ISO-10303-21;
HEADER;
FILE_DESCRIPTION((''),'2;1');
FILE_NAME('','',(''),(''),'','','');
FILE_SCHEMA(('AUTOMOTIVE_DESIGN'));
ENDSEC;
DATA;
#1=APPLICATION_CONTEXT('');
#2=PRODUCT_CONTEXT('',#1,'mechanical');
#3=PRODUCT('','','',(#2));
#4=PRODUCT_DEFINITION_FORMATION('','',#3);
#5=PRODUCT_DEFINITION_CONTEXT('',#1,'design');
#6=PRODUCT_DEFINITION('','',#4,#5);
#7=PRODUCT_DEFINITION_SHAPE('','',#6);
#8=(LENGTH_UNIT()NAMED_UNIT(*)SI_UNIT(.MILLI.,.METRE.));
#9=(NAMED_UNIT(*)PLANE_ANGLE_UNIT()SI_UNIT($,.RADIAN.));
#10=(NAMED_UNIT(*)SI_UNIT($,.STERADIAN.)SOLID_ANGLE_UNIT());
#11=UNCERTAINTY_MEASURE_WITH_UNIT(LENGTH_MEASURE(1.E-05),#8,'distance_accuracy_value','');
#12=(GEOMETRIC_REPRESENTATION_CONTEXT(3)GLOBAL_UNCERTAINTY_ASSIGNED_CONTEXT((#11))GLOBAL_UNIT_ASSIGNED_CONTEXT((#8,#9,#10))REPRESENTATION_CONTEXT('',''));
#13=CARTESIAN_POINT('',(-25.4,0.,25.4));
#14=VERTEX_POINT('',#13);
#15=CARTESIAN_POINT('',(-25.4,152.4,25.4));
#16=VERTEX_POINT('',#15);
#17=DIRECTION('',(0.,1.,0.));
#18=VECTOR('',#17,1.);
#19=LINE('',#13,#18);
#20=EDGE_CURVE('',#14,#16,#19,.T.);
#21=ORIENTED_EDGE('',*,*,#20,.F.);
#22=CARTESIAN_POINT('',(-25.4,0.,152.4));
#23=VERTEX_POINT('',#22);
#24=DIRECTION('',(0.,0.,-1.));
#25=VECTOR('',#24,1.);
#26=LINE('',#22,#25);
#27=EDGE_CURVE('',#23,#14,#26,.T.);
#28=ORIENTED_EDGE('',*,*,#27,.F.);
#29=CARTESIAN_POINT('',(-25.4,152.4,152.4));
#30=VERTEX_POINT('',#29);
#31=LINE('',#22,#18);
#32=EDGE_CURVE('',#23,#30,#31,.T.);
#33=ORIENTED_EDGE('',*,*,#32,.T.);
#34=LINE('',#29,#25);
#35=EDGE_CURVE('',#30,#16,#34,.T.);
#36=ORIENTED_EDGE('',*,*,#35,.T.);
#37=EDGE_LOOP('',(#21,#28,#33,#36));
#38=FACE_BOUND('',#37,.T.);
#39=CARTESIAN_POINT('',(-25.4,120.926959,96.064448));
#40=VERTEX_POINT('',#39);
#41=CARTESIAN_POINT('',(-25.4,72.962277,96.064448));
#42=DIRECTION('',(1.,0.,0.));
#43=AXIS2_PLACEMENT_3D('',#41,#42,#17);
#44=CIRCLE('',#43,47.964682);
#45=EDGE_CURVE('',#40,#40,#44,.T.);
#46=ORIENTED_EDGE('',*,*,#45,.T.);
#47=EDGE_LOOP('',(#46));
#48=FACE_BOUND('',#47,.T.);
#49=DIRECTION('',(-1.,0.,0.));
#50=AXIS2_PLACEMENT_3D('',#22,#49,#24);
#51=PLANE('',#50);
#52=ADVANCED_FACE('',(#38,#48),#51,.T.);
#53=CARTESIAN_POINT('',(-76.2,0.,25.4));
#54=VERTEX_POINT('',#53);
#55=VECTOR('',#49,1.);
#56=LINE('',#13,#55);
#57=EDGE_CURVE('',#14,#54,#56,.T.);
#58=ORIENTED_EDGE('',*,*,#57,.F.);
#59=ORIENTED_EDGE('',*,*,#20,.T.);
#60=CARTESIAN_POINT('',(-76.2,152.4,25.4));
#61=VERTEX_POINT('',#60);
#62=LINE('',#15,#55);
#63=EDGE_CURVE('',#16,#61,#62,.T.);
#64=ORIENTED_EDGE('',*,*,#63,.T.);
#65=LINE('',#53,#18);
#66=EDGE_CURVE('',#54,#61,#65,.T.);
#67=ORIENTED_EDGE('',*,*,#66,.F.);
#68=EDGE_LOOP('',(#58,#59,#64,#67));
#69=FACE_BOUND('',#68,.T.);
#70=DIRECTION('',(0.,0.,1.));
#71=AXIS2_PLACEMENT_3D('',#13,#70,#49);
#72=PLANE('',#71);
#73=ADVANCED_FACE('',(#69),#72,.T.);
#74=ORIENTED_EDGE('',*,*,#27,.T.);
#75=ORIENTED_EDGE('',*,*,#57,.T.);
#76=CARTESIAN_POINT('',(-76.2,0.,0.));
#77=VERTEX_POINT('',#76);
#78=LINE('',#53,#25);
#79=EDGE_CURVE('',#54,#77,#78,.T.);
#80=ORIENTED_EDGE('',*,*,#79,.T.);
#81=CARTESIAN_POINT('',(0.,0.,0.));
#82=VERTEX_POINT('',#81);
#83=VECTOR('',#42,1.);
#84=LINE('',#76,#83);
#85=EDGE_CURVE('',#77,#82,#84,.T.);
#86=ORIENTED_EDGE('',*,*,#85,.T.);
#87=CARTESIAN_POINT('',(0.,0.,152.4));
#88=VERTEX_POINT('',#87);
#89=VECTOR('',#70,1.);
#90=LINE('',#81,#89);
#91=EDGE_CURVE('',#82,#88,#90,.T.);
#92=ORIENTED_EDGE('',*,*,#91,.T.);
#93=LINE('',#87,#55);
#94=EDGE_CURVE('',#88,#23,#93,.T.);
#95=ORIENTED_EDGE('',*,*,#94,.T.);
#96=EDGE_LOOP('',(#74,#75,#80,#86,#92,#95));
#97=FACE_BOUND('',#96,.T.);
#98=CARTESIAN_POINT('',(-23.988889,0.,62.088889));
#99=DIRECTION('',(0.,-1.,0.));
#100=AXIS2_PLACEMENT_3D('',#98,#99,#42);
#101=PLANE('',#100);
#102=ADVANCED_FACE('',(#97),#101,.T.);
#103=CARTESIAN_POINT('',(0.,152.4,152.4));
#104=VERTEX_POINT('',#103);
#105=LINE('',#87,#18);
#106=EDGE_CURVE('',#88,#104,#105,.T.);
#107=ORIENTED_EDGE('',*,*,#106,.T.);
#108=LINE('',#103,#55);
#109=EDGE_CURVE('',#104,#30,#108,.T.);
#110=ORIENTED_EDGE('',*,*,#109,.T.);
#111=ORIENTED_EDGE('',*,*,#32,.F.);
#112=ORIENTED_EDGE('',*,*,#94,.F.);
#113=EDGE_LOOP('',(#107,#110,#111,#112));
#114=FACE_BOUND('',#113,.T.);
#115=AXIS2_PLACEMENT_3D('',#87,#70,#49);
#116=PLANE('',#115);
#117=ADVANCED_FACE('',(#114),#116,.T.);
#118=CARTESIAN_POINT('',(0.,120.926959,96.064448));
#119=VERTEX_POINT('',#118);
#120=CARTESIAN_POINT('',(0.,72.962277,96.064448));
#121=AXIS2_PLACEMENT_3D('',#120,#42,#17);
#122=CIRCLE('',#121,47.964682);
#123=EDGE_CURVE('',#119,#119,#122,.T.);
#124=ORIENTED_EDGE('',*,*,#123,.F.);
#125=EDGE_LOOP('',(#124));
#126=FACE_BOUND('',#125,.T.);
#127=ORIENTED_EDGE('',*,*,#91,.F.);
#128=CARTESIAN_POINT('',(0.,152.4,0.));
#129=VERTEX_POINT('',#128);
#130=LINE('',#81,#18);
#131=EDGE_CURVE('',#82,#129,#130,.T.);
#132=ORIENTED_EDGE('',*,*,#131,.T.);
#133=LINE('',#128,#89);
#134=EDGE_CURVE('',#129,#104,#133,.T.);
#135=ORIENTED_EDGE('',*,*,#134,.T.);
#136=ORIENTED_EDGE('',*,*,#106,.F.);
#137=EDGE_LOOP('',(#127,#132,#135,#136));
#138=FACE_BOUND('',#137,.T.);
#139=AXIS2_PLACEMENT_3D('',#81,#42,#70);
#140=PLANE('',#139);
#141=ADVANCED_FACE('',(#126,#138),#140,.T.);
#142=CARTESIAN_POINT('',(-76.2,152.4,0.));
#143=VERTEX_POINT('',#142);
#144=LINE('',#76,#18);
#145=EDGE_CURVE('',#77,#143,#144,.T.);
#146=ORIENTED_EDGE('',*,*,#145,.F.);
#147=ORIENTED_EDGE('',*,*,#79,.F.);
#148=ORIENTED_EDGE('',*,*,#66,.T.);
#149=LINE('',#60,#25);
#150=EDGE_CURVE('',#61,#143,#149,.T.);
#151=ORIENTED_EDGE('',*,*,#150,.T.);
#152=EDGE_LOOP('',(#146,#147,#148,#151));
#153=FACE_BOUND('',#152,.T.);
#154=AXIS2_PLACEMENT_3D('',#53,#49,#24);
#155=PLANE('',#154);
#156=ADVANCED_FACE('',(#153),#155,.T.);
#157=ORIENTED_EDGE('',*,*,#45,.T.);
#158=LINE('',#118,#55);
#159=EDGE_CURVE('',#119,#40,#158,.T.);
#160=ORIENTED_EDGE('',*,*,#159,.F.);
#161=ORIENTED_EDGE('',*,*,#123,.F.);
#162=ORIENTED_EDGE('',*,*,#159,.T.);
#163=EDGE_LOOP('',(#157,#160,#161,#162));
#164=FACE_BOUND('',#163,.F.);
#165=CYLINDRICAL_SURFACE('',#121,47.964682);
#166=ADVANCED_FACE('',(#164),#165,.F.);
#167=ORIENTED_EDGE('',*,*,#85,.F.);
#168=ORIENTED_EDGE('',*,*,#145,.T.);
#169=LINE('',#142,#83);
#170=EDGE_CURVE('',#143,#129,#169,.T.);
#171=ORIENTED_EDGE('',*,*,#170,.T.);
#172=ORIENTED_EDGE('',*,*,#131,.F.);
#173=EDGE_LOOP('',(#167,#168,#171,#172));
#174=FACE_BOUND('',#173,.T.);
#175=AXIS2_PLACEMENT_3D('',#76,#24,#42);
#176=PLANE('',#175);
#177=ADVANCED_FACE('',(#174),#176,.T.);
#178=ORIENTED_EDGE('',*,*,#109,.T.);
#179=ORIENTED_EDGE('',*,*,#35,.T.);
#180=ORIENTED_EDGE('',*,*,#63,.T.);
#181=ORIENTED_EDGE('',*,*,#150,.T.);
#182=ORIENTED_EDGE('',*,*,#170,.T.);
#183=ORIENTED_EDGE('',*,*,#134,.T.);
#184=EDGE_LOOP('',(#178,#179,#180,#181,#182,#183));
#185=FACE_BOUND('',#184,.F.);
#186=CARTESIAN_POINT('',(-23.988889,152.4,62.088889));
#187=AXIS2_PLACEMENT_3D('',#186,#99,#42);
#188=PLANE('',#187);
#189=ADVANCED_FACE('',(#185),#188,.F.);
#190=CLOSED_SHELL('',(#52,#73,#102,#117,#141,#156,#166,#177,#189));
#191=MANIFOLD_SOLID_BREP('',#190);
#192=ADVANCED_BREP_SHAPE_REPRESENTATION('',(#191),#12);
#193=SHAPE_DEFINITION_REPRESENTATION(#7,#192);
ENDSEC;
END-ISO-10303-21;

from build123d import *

# Parameters (mm, degrees)
F1_DEPTH = 152.4
F2_R     = 47.9646820368
F3_DEPTH = 152.4


# Not quite as in the source:
# - a feature names something its author has since deleted; it is built from what else it names


with BuildPart() as f1:
    # F0 (on Front) → F1 (new body)
    with BuildSketch(Plane.XZ):
        Polygon((-76.2, 0), (0, 0), (0, 152.4), (-25.4, 152.4), (-25.4, 25.4), (-76.2, 25.4), align=None)
    extrude(amount=-F1_DEPTH)

    # F2 (on Right) → F3 (cut)
    with BuildSketch(Plane.YZ):
        with Locations((72.9622766376, 96.0644483566)):
            Circle(F2_R)
    extrude(amount=-F3_DEPTH, mode=Mode.SUBTRACT)


solid = f1.part
